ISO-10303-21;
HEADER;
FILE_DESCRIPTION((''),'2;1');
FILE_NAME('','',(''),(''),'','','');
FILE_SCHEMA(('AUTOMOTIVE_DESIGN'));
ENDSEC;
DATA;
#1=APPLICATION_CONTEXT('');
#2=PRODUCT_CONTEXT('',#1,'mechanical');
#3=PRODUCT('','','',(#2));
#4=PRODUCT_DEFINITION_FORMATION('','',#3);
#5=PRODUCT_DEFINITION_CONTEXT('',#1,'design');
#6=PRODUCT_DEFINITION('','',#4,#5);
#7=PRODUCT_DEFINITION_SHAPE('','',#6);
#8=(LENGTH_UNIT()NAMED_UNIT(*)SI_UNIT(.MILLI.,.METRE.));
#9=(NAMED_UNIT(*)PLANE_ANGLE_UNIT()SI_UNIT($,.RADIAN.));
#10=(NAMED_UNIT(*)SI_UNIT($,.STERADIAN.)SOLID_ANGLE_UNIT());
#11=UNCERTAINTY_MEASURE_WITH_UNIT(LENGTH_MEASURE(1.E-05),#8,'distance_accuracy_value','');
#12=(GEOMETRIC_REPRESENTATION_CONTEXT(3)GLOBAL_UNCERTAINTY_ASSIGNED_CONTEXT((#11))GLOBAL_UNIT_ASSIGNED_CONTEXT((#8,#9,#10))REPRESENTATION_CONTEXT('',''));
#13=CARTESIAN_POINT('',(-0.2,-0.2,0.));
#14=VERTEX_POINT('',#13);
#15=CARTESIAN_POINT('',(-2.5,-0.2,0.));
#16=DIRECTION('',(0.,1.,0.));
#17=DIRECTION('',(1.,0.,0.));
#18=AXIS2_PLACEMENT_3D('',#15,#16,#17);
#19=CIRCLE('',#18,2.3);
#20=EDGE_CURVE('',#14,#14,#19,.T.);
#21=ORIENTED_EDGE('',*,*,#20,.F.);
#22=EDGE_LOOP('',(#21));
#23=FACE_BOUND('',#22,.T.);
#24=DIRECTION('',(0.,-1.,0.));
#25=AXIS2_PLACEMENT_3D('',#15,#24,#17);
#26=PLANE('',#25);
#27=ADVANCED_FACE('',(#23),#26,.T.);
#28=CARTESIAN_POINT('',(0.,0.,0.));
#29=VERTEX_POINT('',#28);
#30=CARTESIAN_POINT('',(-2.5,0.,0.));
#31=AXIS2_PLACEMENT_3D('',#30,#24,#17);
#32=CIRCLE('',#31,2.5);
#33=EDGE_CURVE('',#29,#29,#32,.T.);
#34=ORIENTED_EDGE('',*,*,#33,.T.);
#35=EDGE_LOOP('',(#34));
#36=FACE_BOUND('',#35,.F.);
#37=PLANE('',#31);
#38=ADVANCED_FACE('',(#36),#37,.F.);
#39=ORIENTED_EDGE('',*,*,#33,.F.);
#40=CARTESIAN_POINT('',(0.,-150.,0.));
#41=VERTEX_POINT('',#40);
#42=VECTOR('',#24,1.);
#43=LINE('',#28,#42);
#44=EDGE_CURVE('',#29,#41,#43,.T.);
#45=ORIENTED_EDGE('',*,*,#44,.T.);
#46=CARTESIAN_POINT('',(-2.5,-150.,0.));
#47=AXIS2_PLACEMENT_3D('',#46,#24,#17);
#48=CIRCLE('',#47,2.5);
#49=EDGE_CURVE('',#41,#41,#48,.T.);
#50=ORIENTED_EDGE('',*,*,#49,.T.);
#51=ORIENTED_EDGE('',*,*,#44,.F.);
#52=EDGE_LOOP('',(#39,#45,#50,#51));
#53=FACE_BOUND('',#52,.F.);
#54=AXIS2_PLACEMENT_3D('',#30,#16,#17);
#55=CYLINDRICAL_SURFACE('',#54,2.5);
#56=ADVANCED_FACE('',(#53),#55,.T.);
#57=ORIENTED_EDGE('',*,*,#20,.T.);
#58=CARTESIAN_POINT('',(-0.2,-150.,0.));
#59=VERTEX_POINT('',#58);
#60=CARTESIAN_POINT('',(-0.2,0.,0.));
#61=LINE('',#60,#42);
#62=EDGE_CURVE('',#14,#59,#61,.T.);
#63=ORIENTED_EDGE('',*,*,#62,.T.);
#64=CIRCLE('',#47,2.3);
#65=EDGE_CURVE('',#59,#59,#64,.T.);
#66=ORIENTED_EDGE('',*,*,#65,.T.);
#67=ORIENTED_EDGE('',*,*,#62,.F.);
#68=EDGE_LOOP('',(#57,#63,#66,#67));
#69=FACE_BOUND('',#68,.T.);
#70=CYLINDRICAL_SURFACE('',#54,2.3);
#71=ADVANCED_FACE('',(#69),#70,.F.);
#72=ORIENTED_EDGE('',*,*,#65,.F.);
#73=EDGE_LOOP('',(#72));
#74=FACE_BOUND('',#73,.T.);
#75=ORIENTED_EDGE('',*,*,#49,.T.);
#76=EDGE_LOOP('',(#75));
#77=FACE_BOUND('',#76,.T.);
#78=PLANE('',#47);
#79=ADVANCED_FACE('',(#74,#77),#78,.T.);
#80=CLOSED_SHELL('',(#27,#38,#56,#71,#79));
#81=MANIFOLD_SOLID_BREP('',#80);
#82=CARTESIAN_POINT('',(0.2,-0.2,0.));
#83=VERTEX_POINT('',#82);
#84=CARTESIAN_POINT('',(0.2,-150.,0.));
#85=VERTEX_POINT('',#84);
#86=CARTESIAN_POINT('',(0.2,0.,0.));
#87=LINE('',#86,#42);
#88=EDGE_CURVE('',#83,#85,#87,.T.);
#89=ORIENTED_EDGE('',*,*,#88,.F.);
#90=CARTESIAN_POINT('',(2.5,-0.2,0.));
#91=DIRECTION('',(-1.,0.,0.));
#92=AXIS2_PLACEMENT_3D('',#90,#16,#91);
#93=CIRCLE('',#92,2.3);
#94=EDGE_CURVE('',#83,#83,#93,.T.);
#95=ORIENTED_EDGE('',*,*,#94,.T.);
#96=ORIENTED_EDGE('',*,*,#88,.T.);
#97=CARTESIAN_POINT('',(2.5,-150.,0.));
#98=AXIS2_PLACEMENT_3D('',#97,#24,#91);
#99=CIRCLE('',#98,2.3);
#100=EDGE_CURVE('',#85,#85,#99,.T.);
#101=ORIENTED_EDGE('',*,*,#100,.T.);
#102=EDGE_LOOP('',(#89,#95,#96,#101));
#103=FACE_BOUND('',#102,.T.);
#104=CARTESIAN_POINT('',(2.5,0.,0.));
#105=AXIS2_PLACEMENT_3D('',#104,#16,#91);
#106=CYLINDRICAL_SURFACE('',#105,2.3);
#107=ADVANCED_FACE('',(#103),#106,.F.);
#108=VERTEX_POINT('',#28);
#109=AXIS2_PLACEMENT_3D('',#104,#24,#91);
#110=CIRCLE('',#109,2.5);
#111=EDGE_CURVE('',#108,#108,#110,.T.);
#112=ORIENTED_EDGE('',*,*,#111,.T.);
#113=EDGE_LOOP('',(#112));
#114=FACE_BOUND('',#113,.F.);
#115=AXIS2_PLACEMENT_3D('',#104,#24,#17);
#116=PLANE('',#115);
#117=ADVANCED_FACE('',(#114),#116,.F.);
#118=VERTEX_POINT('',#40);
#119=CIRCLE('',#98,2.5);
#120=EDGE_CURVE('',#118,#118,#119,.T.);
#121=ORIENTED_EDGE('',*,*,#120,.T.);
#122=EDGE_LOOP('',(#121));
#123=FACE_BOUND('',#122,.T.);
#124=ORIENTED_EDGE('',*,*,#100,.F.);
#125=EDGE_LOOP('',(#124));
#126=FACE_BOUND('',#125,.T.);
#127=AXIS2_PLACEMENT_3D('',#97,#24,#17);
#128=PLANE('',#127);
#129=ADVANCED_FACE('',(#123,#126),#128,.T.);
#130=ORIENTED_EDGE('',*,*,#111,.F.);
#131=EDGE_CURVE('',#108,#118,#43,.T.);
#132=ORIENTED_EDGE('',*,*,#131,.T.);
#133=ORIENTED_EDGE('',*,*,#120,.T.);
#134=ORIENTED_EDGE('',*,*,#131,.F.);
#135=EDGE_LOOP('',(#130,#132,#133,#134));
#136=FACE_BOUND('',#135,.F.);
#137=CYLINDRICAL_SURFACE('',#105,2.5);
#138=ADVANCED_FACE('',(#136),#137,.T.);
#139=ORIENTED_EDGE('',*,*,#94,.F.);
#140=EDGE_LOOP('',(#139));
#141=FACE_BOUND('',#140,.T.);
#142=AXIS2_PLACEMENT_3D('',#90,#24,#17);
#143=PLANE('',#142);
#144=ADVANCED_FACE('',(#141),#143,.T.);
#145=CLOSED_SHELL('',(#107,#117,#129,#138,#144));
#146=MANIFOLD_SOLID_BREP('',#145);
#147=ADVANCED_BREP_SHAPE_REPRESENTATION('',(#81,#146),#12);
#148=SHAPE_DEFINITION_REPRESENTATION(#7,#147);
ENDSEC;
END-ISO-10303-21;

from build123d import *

# Parameters (mm, degrees)
F0_R     = 2.5
F1_DEPTH = 150
F2_T     = -0.2
F2_2_T   = -0.2


with BuildPart() as f1:
    # F0 (on Front) → F1 (new body)
    with BuildSketch(Plane.XZ):
        with Locations((-2.5, 0)):
            Circle(F0_R)
    extrude(amount=F1_DEPTH)

    # F2
    f2_openings = [f1.faces().sort_by_distance(p)[0] for p in [
        (-2.5, -150, 0),
    ]]
    offset(amount=F2_T, openings=f2_openings)


with BuildPart() as f1b:
    # F0 (on Front) → F1, piece 2 (new body)
    with BuildSketch(Plane.XZ):
        with BuildLine():
            ThreePointArc((5, 0), (2.5, 2.5), (0, 0))
            ThreePointArc((0, 0), (2.5, -2.5), (5, 0))
        make_face()
    extrude(amount=F1_DEPTH)

    # F2#2
    f2_2_openings = [f1b.faces().sort_by_distance(p)[0] for p in [
        (2.5, -150, 0),
    ]]
    offset(amount=F2_2_T, openings=f2_2_openings)


solid = Compound([f1.part, f1b.part])
